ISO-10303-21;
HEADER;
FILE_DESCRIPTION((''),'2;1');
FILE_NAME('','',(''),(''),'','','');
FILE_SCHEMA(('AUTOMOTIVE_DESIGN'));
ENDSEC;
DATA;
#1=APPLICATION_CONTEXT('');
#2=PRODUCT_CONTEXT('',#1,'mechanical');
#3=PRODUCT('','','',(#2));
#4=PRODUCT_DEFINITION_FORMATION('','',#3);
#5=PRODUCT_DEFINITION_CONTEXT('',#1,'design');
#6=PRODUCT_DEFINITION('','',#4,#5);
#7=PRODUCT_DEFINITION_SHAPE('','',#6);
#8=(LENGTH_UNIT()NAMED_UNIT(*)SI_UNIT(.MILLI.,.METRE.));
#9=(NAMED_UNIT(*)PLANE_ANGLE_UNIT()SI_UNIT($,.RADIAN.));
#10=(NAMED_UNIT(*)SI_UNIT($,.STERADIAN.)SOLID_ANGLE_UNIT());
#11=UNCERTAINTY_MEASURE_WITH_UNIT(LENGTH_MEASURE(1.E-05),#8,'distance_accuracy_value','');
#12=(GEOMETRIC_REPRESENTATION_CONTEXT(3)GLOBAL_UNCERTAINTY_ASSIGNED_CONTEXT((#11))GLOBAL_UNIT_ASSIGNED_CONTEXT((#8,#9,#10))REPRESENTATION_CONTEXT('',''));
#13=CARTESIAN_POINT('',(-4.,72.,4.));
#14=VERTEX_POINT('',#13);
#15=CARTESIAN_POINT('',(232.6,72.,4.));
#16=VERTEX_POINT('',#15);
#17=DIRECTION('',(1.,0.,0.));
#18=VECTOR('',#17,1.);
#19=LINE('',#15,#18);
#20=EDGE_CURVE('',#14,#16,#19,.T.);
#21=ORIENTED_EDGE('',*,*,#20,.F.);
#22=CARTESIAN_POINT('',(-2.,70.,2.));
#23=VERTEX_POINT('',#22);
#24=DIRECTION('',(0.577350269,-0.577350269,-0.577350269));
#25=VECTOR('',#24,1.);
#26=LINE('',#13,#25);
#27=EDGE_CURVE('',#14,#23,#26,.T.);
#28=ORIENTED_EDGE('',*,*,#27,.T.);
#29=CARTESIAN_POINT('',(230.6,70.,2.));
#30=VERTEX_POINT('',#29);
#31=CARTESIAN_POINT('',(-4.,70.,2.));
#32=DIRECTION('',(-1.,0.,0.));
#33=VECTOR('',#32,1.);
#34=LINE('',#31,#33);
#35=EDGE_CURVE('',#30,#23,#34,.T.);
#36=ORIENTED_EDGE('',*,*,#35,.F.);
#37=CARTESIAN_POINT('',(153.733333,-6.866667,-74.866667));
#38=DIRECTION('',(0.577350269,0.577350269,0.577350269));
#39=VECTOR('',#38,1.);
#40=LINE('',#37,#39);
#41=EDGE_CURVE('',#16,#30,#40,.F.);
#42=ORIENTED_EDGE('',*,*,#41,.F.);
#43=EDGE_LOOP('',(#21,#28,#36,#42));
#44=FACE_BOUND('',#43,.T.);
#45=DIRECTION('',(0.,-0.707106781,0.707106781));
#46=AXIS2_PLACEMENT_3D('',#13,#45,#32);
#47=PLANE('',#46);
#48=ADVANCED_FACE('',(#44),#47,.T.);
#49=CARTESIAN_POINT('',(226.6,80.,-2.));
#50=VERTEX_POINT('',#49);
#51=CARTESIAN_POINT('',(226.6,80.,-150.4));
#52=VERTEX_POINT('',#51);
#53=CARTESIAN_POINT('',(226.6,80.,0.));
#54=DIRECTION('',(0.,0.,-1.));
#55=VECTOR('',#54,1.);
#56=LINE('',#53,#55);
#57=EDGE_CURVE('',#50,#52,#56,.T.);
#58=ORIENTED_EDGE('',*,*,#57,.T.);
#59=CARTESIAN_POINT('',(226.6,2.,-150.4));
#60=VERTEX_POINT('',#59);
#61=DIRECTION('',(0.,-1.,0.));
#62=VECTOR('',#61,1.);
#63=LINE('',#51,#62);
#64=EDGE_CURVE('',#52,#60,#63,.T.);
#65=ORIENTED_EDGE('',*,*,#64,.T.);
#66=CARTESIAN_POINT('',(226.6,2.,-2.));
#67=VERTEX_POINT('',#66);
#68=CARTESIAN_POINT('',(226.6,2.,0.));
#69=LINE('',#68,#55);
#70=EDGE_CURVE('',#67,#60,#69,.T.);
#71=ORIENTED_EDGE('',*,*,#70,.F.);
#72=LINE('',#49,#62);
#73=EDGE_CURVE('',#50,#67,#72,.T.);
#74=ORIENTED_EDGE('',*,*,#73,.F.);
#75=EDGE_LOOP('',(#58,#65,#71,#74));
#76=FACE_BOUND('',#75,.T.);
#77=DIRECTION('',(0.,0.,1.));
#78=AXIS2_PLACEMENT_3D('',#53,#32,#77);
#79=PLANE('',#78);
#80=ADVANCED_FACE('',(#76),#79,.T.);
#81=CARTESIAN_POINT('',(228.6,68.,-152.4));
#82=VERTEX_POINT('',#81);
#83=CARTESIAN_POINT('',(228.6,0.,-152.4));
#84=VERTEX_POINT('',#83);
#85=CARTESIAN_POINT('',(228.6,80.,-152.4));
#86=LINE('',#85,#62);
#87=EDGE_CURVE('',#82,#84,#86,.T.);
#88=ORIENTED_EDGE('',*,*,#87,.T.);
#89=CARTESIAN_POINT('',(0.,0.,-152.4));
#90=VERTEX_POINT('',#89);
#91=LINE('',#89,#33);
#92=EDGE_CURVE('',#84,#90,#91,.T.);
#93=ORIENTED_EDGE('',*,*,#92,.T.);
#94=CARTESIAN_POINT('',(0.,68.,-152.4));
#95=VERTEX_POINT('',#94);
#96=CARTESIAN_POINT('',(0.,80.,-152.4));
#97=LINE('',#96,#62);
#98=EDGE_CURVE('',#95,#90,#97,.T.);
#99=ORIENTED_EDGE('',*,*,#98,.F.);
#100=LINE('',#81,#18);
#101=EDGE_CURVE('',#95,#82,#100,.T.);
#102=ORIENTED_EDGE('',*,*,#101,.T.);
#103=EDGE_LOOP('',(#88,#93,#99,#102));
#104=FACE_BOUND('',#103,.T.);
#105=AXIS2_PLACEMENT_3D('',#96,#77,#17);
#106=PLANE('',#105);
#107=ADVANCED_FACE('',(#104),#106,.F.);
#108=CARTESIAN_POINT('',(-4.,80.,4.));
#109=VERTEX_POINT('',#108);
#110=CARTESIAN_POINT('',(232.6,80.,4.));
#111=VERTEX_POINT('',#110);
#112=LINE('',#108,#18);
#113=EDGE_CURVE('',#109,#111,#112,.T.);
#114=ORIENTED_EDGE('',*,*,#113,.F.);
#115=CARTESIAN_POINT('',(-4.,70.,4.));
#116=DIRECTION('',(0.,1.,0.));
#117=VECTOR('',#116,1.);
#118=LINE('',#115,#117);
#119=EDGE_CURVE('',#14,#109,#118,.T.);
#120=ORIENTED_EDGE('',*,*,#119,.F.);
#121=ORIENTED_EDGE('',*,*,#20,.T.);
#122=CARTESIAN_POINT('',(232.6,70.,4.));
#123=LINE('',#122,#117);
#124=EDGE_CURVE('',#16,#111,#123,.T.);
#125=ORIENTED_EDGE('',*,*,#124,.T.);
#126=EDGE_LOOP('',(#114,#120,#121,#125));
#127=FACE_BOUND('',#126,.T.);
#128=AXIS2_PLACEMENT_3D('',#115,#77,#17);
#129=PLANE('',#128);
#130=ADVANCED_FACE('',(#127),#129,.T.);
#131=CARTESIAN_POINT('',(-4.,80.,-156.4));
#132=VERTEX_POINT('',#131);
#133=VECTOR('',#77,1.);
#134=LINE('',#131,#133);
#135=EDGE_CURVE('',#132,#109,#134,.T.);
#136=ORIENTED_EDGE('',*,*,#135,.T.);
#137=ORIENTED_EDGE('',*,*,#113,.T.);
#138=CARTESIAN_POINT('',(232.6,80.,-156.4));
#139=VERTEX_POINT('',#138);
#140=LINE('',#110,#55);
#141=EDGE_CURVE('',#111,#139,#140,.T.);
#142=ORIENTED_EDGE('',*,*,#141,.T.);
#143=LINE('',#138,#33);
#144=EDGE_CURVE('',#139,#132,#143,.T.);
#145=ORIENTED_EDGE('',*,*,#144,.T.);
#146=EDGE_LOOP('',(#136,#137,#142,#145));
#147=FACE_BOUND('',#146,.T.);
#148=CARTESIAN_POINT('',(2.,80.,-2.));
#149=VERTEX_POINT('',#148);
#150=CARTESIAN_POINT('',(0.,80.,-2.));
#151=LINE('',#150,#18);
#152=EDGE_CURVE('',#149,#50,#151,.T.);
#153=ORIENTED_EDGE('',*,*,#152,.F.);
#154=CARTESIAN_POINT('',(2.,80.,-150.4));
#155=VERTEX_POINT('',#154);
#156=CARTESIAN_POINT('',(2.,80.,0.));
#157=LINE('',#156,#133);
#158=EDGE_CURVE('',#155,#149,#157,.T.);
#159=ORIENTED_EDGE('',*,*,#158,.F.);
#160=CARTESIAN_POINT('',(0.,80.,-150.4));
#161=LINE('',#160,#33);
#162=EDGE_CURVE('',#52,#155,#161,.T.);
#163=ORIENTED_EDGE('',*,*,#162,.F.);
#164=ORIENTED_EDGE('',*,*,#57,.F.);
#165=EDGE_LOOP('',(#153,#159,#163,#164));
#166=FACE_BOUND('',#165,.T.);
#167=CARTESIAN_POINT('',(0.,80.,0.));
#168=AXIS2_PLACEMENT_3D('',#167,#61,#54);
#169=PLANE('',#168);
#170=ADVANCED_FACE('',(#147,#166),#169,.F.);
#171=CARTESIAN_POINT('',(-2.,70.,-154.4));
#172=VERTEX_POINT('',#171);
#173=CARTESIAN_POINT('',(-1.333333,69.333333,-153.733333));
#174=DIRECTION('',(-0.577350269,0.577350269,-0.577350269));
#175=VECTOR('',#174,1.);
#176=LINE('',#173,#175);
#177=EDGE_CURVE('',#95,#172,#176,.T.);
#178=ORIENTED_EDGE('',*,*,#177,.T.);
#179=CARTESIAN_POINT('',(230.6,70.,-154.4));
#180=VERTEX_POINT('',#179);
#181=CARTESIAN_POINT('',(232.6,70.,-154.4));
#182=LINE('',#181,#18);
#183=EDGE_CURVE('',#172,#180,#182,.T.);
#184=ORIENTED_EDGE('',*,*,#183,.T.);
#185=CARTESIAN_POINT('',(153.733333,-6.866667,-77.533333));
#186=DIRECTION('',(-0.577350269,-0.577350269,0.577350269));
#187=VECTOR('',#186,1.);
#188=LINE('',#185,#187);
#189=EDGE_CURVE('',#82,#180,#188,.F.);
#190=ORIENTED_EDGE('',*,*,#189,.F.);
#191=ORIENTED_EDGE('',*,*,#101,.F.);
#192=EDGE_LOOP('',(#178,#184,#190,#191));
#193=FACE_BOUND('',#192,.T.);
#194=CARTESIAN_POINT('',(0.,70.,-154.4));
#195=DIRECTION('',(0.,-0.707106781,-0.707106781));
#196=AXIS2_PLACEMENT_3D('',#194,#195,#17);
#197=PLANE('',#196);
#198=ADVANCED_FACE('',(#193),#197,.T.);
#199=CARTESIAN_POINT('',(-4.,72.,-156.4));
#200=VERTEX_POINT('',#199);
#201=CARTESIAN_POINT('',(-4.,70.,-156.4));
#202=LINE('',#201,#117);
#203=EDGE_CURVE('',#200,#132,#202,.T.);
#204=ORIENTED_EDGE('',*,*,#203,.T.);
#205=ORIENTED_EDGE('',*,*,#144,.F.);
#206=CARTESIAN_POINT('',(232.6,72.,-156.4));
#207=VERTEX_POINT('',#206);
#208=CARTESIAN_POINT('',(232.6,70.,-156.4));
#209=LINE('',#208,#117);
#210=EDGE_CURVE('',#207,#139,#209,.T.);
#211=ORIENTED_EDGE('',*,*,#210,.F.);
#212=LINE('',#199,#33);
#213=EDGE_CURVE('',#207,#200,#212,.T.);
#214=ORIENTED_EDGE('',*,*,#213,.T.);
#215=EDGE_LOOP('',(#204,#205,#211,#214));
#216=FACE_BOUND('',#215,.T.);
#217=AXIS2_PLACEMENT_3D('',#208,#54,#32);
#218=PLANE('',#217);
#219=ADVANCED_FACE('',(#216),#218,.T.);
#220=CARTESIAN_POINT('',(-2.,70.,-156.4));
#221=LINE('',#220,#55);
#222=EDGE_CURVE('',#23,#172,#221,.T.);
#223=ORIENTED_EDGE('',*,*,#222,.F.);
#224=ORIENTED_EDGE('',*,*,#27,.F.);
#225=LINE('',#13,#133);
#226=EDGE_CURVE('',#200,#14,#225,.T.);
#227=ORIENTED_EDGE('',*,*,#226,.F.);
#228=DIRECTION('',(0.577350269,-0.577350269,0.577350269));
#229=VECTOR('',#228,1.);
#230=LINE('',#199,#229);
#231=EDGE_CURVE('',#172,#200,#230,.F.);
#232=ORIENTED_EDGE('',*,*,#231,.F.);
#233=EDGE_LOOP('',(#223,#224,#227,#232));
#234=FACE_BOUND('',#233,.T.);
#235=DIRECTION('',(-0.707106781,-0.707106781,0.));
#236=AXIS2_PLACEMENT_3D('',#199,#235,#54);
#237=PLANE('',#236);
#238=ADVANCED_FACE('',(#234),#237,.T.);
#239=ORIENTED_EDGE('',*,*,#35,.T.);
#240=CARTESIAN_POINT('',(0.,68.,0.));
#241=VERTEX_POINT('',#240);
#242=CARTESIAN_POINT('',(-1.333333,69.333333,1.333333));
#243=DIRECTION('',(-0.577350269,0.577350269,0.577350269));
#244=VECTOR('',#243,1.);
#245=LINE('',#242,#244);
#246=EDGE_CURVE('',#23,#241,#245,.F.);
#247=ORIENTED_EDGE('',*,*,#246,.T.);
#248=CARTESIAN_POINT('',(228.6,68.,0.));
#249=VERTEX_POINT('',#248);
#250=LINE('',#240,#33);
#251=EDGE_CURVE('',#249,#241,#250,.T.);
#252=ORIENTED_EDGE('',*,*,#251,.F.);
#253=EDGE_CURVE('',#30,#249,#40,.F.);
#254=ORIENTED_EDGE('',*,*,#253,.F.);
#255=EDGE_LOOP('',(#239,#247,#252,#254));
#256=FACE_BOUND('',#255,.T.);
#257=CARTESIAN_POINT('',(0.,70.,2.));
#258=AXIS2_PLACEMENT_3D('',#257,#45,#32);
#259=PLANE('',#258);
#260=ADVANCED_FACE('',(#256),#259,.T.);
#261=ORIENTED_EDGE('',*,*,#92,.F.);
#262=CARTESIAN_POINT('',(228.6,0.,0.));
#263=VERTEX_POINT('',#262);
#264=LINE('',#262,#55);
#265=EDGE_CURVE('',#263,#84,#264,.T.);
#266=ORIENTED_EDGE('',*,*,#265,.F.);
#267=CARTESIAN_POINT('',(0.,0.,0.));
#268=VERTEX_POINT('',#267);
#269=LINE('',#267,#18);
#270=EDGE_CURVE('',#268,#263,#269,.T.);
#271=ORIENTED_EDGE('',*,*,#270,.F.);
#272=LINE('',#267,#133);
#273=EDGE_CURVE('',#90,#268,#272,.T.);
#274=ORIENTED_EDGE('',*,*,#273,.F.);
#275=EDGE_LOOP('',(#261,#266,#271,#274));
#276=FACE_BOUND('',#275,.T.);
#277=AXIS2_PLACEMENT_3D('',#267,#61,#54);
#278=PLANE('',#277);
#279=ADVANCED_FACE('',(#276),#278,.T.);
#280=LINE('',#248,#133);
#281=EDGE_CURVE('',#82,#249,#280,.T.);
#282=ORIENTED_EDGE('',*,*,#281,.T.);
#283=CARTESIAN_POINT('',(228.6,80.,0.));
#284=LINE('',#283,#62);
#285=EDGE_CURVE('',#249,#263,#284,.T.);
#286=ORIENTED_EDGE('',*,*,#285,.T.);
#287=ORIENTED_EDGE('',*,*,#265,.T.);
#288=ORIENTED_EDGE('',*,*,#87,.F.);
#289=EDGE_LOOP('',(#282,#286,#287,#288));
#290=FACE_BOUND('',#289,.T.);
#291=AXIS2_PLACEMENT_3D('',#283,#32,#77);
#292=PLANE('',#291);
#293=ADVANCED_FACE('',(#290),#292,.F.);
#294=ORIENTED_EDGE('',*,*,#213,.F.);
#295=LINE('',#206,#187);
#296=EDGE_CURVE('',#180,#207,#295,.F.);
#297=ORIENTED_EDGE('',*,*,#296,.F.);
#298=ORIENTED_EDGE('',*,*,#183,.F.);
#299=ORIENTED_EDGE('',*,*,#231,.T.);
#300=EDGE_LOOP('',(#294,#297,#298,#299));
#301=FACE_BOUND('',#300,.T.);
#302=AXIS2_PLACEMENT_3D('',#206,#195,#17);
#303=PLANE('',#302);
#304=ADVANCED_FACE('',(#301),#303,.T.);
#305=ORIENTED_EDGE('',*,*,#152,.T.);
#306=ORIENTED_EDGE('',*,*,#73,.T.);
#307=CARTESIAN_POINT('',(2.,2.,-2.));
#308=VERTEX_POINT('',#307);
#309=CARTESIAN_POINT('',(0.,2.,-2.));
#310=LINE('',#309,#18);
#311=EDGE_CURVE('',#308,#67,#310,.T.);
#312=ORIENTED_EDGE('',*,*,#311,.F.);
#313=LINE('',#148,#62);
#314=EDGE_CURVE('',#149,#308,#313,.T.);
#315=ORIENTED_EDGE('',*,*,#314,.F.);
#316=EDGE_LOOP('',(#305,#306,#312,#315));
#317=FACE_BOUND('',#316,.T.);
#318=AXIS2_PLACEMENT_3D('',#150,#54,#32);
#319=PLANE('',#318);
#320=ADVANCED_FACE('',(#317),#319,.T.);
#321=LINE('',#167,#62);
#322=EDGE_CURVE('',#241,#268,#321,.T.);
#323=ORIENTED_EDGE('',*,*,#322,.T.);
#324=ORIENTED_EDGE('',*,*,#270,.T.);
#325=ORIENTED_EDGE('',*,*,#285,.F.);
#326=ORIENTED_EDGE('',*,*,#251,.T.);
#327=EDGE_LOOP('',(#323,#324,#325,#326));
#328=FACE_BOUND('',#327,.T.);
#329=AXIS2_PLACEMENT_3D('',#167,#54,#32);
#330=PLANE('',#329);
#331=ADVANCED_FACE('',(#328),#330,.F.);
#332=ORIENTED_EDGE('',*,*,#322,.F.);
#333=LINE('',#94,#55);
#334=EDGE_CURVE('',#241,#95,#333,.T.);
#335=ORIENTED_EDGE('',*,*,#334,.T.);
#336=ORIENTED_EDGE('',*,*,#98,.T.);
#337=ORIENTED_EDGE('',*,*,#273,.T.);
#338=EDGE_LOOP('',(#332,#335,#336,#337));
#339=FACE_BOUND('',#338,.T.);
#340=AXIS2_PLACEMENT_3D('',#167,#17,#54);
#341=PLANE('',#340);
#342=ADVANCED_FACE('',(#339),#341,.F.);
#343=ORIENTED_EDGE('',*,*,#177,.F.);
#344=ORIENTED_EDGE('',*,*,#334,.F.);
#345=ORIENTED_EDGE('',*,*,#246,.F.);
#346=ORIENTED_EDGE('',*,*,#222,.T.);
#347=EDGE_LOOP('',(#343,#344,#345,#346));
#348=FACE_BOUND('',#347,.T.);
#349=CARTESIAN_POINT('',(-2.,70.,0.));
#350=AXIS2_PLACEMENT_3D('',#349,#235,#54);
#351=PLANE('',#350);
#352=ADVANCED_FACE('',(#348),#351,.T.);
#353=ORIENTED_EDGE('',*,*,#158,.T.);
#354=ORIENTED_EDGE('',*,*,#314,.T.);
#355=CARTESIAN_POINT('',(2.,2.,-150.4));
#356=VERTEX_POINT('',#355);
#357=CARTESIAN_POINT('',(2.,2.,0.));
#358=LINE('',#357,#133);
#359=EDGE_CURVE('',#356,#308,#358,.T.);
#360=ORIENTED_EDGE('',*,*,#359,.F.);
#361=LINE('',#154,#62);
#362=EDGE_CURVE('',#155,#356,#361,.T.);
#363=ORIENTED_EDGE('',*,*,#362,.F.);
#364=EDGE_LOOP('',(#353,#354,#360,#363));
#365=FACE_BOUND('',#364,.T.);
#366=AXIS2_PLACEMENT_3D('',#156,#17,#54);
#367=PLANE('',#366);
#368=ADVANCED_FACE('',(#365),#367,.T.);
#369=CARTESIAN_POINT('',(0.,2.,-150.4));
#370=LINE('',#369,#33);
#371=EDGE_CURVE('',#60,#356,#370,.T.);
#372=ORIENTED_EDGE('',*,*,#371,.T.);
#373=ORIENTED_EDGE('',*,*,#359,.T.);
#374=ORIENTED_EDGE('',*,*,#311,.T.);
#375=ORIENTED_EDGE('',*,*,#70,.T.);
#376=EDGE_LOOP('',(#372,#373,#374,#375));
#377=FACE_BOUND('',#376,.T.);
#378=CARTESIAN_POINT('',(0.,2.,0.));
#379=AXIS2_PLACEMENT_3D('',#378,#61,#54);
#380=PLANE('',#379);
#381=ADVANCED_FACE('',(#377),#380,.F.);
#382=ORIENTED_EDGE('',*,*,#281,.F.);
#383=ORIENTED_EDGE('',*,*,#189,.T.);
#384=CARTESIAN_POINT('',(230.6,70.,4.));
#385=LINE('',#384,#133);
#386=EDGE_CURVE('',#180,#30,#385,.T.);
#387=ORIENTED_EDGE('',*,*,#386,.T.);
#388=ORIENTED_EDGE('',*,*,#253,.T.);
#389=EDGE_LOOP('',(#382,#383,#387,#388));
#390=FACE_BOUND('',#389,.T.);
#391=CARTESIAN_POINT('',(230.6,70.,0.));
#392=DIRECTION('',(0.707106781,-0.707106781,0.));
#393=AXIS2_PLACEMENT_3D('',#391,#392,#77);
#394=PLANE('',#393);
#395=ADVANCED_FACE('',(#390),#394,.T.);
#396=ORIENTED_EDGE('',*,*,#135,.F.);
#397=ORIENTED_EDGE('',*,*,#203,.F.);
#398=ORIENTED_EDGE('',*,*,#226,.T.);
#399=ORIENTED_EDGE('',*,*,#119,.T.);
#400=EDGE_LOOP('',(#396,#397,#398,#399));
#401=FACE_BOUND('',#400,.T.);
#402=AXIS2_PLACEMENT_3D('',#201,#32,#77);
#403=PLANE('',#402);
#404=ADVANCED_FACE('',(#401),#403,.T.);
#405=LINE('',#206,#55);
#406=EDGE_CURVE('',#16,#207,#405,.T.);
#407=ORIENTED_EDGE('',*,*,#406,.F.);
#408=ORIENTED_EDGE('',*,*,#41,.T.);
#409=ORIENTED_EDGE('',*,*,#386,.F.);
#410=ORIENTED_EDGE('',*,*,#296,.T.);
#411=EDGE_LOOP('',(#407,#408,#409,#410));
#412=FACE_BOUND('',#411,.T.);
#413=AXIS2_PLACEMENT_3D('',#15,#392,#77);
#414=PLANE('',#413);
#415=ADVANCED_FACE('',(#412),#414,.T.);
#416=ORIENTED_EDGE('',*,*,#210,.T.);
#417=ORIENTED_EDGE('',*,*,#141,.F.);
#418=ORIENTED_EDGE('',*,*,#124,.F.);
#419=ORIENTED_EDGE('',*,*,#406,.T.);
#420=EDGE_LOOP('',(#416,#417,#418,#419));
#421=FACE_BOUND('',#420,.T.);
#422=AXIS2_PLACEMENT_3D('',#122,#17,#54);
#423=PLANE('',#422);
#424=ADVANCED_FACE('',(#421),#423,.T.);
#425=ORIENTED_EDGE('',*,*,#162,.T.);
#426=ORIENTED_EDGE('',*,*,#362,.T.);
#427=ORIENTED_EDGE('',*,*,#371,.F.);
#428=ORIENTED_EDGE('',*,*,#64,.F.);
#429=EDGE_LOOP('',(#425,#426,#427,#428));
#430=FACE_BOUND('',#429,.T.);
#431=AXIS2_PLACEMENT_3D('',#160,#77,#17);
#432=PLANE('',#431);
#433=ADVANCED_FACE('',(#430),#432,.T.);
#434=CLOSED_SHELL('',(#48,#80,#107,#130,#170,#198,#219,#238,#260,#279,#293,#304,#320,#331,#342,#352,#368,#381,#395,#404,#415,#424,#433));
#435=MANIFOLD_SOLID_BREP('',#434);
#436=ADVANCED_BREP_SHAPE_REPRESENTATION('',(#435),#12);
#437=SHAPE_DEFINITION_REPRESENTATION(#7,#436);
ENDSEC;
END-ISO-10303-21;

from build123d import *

# Parameters (mm, degrees)
SKETCH1_W           = 228.6
SKETCH1_H           = 152.4
BOSS_EXTRUDE1_DEPTH = 80
SHELL1_T            = -2
SKETCH2_W           = 236.6
SKETCH2_H           = 160.4
SKETCH2_W_2         = 224.6
SKETCH2_H_2         = 148.4
BOSS_EXTRUDE2_DEPTH = 10
CHAMFER1_SIZE       = 2


with BuildPart() as part:
    # Sketch1 → Boss-Extrude1 (new body)
    with BuildSketch(Plane(origin=(0, 0, 0), x_dir=(1, 0, 0), z_dir=(0, 1, 0))):
        with Locations((114.3, 76.2)):
            Rectangle(SKETCH1_W, SKETCH1_H)
    extrude(amount=BOSS_EXTRUDE1_DEPTH)

    # Shell1
    shell1_openings = [part.faces().sort_by_distance(p)[0] for p in [
        (114.3, 80, -76.2),
    ]]
    offset(amount=SHELL1_T, openings=shell1_openings, kind=Kind.INTERSECTION)

    # Sketch2 → Boss-Extrude2 (add)
    with BuildSketch(Plane(origin=(0, 80, 0), x_dir=(1, 0, 0), z_dir=(0, 1, 0))):
        with Locations((114.3, 76.2)):
            Rectangle(SKETCH2_W, SKETCH2_H)
        with Locations((114.3, 76.2)):
            Rectangle(SKETCH2_W_2, SKETCH2_H_2, mode=Mode.SUBTRACT)
    extrude(amount=-BOSS_EXTRUDE2_DEPTH)

    # Chamfer1
    chamfer1_edges = [part.edges().sort_by_distance(p)[0] for p in [
        (114.3, 70, -152.4),
        (0, 70, -76.2),
        (114.3, 70, 0),
        (228.6, 70, -76.2),
        (114.3, 70, 4),
        (-4, 70, -76.2),
        (114.3, 70, -156.4),
        (232.6, 70, -76.2),
    ]]
    chamfer(chamfer1_edges, length=CHAMFER1_SIZE - 0.0001)  # a hair under: the kernel refuses the full size


solid = part.part
